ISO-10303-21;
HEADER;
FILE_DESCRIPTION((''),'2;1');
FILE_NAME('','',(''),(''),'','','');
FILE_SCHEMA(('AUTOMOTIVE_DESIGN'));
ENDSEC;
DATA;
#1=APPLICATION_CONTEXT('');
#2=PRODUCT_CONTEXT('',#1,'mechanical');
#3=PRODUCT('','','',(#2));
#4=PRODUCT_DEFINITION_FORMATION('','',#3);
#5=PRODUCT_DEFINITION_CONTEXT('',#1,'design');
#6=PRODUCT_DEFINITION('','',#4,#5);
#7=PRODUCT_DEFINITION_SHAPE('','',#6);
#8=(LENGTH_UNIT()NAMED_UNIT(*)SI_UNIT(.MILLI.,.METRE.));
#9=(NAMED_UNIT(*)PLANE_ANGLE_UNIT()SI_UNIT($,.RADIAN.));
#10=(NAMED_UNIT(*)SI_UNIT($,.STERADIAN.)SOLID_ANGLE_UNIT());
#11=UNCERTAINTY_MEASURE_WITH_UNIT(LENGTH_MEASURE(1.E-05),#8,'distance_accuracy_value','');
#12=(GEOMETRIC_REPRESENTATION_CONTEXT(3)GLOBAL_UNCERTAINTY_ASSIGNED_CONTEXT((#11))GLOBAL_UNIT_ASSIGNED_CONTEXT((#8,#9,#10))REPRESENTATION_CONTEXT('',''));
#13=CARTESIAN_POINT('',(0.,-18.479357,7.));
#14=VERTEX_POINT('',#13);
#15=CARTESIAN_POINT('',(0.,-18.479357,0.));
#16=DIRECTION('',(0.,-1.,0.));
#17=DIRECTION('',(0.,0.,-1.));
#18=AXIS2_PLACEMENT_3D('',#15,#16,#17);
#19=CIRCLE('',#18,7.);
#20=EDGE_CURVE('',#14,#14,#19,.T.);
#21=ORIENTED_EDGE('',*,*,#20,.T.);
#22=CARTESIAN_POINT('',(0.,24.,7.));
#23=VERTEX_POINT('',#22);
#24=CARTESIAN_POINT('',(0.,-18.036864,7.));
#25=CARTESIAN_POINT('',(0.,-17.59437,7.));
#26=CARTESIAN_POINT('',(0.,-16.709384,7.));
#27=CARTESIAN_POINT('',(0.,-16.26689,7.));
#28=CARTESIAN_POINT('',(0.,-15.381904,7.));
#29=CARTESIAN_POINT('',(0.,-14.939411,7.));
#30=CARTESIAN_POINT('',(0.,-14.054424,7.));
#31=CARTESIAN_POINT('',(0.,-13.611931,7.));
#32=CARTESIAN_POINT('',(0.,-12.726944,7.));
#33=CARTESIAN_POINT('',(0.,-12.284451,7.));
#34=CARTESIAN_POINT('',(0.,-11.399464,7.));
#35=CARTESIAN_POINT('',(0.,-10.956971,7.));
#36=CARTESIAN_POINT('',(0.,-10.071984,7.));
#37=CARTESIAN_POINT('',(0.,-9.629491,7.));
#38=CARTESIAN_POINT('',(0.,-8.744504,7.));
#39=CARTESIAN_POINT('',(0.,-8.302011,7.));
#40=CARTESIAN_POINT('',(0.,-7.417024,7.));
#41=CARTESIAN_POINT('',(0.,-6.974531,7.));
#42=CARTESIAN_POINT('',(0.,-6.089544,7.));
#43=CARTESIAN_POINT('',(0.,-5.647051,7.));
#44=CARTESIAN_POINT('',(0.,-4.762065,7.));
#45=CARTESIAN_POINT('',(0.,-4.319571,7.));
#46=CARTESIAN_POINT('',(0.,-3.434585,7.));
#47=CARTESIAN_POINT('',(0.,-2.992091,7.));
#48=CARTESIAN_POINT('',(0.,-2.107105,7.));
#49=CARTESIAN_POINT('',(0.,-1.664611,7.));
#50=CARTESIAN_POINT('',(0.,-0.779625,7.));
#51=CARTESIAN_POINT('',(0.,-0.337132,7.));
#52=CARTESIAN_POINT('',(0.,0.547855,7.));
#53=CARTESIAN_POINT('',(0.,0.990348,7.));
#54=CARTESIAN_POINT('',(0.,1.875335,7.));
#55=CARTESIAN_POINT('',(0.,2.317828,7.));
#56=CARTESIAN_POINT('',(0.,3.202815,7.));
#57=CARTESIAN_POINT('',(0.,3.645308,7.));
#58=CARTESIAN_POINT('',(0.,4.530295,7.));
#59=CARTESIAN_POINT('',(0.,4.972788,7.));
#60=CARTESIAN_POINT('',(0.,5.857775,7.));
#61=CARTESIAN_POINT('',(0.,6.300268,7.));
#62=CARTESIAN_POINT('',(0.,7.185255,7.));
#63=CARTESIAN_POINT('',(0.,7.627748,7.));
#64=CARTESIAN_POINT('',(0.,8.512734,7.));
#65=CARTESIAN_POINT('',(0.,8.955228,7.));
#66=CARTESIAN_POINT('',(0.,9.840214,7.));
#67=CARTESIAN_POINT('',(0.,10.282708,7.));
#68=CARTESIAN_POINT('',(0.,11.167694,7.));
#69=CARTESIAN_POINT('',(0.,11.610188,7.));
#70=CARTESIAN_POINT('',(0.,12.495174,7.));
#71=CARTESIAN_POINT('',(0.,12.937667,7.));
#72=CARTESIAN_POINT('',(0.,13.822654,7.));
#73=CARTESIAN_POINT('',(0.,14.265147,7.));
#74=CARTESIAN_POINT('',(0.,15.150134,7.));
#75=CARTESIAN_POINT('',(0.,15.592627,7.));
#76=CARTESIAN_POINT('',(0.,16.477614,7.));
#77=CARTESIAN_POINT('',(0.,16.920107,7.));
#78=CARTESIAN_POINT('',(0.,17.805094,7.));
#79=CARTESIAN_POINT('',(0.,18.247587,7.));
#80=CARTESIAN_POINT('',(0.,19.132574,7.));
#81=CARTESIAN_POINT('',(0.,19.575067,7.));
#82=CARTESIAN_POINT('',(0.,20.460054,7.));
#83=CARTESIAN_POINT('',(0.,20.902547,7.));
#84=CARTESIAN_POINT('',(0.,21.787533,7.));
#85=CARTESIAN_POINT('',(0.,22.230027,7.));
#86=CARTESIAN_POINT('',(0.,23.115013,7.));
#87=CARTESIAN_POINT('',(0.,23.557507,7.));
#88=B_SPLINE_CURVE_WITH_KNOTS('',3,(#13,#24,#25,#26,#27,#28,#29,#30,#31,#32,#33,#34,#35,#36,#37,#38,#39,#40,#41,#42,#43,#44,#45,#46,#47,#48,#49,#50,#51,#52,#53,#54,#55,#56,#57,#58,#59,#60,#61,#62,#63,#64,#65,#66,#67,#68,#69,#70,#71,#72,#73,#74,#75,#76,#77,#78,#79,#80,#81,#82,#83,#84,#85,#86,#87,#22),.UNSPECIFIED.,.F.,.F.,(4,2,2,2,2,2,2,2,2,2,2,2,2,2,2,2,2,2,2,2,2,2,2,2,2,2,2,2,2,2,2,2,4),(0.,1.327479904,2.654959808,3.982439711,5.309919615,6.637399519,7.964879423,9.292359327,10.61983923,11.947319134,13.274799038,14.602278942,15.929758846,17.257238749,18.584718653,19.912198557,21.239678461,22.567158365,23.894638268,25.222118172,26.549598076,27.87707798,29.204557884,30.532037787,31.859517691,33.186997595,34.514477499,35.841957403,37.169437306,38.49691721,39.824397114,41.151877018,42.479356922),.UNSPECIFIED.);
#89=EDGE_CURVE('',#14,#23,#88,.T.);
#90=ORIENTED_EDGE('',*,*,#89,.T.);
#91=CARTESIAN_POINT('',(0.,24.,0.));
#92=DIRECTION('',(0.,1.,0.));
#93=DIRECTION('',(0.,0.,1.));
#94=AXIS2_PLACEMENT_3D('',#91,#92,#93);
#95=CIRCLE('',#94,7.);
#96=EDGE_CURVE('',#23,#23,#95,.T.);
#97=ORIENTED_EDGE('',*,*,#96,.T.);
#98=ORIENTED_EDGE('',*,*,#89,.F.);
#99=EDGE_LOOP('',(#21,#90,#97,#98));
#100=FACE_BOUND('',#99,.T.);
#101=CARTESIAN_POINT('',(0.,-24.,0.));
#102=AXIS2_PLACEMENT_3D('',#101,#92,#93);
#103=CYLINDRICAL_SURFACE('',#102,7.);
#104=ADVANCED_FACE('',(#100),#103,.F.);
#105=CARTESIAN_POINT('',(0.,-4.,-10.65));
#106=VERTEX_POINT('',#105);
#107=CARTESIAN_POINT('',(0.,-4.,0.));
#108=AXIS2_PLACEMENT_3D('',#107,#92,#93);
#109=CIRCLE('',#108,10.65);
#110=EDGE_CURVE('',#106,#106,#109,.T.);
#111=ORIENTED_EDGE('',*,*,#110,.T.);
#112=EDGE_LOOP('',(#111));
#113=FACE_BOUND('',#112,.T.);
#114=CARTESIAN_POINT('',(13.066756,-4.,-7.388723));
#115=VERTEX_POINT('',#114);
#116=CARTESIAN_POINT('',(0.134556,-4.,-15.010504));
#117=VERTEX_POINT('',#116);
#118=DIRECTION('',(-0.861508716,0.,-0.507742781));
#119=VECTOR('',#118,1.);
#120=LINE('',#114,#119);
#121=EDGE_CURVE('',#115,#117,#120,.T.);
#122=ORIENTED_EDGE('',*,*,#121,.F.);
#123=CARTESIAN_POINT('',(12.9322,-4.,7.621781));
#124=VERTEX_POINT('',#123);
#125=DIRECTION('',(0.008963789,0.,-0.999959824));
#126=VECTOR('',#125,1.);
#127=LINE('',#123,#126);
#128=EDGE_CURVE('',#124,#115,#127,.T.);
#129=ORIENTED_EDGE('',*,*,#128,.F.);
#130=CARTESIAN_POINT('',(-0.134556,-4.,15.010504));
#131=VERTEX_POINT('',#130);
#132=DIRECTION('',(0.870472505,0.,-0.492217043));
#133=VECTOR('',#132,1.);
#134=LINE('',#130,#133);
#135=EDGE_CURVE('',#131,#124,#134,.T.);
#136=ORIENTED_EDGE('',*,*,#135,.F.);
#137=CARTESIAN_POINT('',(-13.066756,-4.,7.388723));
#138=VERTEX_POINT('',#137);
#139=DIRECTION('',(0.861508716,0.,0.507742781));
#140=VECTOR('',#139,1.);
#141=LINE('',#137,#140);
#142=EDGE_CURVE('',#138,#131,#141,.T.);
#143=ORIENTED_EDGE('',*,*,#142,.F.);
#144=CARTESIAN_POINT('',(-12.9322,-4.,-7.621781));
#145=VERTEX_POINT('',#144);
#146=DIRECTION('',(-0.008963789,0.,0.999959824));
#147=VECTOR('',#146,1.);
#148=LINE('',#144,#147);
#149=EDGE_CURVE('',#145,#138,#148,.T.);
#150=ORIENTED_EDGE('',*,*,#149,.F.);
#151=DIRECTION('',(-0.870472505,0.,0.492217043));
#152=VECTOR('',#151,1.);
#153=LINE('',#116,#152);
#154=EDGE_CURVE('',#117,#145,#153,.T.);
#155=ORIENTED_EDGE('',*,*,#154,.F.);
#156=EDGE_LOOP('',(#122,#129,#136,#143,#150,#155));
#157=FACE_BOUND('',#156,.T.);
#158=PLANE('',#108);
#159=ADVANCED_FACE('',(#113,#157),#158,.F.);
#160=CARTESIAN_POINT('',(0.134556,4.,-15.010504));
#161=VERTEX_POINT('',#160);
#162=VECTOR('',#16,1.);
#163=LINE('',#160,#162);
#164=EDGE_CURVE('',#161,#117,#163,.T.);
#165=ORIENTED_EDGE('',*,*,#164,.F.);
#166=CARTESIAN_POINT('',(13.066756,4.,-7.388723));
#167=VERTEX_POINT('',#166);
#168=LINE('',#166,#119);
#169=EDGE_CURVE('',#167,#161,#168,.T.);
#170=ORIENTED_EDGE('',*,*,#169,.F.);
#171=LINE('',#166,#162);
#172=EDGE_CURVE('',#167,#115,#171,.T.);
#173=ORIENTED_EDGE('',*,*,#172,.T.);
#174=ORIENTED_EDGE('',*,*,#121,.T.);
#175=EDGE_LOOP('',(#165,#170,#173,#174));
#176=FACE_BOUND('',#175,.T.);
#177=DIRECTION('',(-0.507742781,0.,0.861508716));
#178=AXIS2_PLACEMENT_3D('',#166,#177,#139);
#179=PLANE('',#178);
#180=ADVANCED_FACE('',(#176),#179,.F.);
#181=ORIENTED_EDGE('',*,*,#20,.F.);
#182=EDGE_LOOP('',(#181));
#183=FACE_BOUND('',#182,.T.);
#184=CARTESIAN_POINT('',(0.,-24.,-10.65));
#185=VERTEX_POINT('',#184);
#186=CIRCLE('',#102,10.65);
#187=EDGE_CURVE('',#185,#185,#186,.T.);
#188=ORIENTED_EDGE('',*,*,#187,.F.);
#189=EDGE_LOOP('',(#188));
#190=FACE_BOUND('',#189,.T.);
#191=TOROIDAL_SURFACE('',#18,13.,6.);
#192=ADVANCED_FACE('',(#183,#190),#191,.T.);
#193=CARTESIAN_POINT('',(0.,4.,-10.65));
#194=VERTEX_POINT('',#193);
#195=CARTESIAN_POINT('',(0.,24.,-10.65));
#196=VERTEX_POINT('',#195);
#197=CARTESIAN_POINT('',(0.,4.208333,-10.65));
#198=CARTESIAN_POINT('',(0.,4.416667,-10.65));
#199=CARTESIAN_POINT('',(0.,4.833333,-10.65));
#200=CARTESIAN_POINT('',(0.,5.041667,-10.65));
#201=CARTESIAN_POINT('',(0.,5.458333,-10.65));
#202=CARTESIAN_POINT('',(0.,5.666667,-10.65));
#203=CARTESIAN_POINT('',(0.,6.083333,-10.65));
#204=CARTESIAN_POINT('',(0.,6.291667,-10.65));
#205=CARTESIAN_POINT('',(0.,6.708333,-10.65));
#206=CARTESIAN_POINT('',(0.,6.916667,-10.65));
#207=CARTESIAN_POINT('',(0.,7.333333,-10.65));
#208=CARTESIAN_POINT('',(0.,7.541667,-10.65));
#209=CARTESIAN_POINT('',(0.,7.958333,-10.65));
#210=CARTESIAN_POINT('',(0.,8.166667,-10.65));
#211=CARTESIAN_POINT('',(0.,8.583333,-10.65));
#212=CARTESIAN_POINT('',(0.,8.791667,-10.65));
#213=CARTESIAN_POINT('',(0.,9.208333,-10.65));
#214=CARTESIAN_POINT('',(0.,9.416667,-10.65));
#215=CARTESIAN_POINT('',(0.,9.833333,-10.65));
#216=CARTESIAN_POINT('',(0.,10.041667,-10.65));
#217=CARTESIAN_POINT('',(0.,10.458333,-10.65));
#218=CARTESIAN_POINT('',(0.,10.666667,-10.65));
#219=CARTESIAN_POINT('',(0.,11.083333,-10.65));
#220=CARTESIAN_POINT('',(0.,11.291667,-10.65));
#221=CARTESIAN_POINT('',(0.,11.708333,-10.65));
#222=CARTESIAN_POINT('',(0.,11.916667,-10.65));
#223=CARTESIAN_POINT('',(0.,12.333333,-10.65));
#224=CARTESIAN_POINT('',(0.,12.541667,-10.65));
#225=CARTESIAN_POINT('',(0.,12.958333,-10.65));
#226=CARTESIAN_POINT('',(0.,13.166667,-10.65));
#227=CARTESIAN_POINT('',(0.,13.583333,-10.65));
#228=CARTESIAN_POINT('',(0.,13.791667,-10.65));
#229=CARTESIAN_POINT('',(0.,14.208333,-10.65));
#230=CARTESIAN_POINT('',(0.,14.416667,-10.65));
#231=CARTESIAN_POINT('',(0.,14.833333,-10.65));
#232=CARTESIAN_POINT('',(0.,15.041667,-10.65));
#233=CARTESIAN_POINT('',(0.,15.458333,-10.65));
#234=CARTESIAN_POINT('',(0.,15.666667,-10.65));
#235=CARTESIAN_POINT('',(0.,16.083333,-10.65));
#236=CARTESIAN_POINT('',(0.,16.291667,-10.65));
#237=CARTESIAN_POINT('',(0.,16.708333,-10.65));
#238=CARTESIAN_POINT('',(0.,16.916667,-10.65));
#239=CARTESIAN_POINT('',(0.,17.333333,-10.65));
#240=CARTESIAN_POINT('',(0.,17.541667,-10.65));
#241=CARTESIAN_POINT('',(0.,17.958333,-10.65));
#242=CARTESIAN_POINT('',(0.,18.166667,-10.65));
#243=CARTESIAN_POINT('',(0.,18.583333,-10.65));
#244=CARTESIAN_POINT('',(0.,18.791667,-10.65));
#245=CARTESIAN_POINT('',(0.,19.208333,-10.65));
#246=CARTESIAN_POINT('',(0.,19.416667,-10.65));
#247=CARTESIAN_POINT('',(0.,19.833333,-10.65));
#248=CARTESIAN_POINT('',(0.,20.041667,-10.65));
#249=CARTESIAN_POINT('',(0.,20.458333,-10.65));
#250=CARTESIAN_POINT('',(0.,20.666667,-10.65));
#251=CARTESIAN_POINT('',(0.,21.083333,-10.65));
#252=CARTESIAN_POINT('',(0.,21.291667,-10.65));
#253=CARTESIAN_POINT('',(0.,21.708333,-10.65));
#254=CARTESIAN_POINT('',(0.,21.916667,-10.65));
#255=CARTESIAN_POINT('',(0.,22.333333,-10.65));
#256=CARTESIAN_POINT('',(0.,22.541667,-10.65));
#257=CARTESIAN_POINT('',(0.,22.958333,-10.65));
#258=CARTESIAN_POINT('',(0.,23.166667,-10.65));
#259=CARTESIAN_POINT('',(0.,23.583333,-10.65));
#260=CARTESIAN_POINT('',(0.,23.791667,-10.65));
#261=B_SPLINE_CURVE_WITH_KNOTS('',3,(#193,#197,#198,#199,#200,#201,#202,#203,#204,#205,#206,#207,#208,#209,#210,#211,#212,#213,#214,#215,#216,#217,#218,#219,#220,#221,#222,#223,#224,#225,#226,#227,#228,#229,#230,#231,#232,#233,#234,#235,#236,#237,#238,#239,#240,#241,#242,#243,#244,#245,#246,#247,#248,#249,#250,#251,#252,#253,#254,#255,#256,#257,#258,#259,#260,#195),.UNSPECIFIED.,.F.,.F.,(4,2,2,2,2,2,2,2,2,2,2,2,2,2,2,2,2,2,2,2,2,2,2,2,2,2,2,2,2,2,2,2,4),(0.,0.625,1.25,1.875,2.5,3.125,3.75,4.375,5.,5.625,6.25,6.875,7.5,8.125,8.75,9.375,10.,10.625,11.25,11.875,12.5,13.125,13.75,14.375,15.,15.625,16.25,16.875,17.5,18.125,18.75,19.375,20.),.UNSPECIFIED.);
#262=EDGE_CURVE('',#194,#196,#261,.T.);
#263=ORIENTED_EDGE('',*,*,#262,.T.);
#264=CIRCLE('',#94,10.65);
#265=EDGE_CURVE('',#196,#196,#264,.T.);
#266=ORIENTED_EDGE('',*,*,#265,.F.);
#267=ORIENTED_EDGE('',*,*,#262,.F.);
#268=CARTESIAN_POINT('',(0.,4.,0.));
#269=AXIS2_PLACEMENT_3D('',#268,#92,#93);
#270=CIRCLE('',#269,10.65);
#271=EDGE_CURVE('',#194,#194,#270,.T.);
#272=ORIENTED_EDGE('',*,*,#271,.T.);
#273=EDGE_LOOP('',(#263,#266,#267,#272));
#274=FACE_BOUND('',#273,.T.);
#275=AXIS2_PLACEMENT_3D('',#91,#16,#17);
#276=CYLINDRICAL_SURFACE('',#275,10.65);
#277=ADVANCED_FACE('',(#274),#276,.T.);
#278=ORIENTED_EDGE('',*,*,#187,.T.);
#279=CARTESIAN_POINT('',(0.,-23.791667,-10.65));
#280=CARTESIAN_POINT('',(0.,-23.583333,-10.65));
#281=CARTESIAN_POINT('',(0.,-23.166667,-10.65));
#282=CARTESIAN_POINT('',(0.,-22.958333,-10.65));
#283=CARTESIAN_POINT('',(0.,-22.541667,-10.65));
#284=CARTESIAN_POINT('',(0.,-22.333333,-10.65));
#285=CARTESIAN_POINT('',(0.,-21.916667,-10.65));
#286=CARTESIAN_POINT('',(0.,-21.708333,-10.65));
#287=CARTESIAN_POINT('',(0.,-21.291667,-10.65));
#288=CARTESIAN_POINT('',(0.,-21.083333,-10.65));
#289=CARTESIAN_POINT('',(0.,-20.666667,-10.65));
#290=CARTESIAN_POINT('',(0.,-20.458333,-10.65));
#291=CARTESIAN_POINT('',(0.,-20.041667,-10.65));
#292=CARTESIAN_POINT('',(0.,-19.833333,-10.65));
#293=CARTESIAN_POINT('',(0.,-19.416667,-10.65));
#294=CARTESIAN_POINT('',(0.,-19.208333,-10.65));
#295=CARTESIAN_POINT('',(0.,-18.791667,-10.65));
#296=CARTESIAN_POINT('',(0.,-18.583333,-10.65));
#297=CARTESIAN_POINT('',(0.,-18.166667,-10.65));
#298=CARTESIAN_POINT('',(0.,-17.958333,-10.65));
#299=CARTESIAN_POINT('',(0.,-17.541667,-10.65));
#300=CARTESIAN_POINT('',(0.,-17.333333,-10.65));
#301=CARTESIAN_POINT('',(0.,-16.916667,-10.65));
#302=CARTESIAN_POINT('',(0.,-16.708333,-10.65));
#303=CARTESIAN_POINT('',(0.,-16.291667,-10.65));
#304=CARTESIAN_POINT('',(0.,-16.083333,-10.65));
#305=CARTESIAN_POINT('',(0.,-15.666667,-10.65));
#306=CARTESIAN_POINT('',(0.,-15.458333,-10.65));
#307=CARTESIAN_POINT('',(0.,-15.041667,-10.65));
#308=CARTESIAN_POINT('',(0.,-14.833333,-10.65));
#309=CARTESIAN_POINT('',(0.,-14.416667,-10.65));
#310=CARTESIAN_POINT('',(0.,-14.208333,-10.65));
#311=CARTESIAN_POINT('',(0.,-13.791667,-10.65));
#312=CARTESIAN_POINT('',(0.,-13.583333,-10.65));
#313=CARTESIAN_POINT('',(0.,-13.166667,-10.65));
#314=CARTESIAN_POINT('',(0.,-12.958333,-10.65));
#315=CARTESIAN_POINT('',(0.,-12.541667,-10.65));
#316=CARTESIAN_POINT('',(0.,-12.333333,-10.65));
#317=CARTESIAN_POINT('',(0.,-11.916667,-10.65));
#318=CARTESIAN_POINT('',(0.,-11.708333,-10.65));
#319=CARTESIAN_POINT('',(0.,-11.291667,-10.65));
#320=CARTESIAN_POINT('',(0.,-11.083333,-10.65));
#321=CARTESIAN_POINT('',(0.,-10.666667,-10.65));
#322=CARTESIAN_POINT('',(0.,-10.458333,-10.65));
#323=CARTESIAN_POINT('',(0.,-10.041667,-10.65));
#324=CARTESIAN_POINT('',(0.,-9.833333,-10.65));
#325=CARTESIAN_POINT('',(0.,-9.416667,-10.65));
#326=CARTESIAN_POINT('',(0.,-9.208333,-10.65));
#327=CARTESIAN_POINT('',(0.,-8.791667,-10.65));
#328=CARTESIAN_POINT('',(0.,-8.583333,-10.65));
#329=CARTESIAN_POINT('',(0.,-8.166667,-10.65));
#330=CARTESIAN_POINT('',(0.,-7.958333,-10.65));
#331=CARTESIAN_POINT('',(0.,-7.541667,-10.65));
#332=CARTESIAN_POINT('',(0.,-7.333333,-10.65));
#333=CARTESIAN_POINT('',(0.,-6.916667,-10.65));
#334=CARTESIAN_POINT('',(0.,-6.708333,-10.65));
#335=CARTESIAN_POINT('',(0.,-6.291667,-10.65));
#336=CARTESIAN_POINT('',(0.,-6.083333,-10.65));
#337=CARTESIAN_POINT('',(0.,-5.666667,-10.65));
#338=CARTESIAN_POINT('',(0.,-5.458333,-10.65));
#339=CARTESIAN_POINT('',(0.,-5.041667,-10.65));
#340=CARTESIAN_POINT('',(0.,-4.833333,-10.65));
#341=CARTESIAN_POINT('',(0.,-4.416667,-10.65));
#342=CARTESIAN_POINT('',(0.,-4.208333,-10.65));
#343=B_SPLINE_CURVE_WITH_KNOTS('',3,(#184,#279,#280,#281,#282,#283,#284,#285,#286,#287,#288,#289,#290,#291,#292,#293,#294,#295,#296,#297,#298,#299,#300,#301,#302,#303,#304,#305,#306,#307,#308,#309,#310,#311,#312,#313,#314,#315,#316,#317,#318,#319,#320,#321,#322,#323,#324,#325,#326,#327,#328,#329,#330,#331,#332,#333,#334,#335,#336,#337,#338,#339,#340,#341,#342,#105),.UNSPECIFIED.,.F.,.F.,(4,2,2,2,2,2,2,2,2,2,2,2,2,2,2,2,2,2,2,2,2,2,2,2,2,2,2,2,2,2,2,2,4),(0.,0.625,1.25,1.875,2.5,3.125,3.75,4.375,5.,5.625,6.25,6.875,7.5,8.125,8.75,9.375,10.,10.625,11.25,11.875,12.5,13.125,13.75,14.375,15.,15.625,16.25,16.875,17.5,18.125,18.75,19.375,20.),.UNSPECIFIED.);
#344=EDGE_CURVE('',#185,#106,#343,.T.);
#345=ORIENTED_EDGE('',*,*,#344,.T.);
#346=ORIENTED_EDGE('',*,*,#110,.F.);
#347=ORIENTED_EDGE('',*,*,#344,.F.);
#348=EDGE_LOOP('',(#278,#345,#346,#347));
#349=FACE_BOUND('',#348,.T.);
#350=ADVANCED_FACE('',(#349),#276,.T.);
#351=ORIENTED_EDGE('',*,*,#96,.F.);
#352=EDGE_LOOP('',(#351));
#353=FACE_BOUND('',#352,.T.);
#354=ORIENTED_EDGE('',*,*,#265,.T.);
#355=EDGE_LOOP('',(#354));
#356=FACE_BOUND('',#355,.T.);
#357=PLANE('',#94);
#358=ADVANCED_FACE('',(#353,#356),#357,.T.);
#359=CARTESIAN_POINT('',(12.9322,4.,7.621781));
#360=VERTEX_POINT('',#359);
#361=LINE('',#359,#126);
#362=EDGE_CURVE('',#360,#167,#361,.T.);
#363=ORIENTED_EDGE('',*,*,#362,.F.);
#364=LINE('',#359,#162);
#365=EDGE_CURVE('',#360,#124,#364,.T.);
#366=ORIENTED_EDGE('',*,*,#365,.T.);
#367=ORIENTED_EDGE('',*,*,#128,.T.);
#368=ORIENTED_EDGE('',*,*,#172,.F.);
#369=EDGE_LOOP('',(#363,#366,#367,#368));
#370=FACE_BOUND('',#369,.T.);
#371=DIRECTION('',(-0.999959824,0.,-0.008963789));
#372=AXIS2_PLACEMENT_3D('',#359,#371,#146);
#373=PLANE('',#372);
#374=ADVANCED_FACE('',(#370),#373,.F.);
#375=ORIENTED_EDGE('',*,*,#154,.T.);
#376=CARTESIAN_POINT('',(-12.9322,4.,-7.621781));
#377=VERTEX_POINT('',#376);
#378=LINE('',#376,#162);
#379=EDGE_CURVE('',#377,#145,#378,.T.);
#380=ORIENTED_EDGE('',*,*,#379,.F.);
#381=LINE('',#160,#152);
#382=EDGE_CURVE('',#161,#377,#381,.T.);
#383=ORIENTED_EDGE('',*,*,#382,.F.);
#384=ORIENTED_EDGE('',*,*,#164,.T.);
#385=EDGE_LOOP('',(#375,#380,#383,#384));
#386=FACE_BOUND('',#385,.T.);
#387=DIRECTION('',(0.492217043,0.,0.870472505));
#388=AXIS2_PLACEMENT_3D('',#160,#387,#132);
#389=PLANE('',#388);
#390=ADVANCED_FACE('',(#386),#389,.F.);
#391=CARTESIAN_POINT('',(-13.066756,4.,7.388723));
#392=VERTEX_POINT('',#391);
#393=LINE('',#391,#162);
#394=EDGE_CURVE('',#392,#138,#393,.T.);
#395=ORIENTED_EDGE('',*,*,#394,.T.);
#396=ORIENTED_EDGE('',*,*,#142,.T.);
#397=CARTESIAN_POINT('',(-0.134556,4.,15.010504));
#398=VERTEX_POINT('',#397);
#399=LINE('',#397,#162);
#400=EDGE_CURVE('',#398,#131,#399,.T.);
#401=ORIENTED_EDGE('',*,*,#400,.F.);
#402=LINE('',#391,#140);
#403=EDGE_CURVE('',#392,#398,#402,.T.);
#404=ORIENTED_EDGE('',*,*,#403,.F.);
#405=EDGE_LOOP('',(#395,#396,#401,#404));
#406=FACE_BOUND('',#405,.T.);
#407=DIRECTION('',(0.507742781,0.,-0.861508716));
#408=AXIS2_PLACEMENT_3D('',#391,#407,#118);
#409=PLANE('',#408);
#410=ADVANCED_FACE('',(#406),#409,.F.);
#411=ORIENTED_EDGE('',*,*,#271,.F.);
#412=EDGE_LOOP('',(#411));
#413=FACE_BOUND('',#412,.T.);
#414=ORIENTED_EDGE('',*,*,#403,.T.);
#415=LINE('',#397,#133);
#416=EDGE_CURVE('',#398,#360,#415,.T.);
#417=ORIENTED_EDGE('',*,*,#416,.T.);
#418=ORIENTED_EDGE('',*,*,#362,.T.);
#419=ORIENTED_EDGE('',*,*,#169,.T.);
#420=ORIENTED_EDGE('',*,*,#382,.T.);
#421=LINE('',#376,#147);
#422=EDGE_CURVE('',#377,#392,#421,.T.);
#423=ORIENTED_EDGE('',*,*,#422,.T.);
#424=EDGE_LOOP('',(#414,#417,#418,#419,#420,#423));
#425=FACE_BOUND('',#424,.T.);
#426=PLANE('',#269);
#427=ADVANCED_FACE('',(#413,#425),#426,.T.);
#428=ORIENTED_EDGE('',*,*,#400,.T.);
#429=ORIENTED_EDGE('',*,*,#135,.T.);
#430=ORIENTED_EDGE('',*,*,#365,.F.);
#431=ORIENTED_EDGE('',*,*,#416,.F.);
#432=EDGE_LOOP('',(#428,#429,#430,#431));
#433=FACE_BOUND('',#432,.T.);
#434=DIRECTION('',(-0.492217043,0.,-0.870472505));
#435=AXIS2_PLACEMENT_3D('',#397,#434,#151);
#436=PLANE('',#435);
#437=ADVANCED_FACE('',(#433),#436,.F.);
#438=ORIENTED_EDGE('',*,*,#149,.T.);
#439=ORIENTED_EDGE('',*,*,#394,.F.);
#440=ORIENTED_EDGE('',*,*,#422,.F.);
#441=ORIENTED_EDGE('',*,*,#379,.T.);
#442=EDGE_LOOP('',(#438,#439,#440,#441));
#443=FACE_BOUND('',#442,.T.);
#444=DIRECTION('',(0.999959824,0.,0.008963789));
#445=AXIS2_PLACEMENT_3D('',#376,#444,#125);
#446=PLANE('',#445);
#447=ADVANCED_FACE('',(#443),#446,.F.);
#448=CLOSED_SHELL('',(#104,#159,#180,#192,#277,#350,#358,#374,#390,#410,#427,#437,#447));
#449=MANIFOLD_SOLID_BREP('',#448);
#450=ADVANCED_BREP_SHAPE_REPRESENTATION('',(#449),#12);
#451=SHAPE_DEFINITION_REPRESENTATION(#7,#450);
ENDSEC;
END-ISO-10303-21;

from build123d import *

# Parameters (mm, degrees)
SKETCH1_R               = 10.65
BOSS_EXTRUDE1_DEPTH     = 24
BOSS_EXTRUDE2_DEPTH     = 4
CUT_EXTRUDE1_DEPTH      = 52.962056715
CUT_EXTRUDE1_DEPTH_BACK = 52.962056715
SKETCH3_R               = 7
FILLET1_R               = 6


with BuildPart() as part:
    # Sketch1 → Boss-Extrude1 (new, symmetric)
    with BuildSketch(Plane(origin=(0, 0, 0), x_dir=(1, 0, 0), z_dir=(0, 1, 0))):
        with Locations(Location((0, 0, 0), (0, 0, 270))):
            Circle(SKETCH1_R)
    extrude(amount=BOSS_EXTRUDE1_DEPTH, both=True)

    # Sketch2 → Boss-Extrude2 (add, symmetric)
    with BuildSketch(Plane(origin=(0, 0, 0), x_dir=(1, 0, 0), z_dir=(0, 1, 0))):
        Polygon((13.066755915, 7.388722704), (0.134556394, 15.010503919), (-12.932199521, 7.621781215), (-13.066755915, -7.388722704), (-0.134556394, -15.010503919), (12.932199521, -7.621781215), align=None)
    extrude(amount=BOSS_EXTRUDE2_DEPTH, both=True)

    # Sketch3 → Cut-Extrude1 (cut, two sides: drawn at the far end of the back side and taken through both)
    with BuildSketch(Plane(origin=(0, 24, 0), x_dir=(1, 0, 0), z_dir=(0, 1, 0)).offset(-CUT_EXTRUDE1_DEPTH_BACK)):
        with Locations(Location((0, 0, 0), (0, 0, 270))):
            Circle(SKETCH3_R)
    extrude(amount=CUT_EXTRUDE1_DEPTH + CUT_EXTRUDE1_DEPTH_BACK, mode=Mode.SUBTRACT)

    # Fillet1
    # the kernel refuses this fillet: 6 mm, written as the material it takes off along each edge
    with BuildSketch(Plane(origin=(0, -24, 0), x_dir=(0, 0, 1), z_dir=(-1, 0, 0))) as fillet1_piece_1:
        with BuildLine():
            CenterArc((13, 5.520643078), FILLET1_R, 180, 66.941755912)
            Line((7, 5.520643078), (6.88, 5.520643078))
            Line((6.88, 5.520643078), (6.88, 0))
            Line((6.88, 0), (7, -0.12))
            ThreePointArc((7, -0.12), (8.825, -0.12), (10.603, -0.110412862))
            Line((10.603, -0.110412862), (10.65, 0))
        make_face()
    revolve(axis=Axis((0, -24, 0), (0, 1, 0)), mode=Mode.SUBTRACT)


solid = part.part
